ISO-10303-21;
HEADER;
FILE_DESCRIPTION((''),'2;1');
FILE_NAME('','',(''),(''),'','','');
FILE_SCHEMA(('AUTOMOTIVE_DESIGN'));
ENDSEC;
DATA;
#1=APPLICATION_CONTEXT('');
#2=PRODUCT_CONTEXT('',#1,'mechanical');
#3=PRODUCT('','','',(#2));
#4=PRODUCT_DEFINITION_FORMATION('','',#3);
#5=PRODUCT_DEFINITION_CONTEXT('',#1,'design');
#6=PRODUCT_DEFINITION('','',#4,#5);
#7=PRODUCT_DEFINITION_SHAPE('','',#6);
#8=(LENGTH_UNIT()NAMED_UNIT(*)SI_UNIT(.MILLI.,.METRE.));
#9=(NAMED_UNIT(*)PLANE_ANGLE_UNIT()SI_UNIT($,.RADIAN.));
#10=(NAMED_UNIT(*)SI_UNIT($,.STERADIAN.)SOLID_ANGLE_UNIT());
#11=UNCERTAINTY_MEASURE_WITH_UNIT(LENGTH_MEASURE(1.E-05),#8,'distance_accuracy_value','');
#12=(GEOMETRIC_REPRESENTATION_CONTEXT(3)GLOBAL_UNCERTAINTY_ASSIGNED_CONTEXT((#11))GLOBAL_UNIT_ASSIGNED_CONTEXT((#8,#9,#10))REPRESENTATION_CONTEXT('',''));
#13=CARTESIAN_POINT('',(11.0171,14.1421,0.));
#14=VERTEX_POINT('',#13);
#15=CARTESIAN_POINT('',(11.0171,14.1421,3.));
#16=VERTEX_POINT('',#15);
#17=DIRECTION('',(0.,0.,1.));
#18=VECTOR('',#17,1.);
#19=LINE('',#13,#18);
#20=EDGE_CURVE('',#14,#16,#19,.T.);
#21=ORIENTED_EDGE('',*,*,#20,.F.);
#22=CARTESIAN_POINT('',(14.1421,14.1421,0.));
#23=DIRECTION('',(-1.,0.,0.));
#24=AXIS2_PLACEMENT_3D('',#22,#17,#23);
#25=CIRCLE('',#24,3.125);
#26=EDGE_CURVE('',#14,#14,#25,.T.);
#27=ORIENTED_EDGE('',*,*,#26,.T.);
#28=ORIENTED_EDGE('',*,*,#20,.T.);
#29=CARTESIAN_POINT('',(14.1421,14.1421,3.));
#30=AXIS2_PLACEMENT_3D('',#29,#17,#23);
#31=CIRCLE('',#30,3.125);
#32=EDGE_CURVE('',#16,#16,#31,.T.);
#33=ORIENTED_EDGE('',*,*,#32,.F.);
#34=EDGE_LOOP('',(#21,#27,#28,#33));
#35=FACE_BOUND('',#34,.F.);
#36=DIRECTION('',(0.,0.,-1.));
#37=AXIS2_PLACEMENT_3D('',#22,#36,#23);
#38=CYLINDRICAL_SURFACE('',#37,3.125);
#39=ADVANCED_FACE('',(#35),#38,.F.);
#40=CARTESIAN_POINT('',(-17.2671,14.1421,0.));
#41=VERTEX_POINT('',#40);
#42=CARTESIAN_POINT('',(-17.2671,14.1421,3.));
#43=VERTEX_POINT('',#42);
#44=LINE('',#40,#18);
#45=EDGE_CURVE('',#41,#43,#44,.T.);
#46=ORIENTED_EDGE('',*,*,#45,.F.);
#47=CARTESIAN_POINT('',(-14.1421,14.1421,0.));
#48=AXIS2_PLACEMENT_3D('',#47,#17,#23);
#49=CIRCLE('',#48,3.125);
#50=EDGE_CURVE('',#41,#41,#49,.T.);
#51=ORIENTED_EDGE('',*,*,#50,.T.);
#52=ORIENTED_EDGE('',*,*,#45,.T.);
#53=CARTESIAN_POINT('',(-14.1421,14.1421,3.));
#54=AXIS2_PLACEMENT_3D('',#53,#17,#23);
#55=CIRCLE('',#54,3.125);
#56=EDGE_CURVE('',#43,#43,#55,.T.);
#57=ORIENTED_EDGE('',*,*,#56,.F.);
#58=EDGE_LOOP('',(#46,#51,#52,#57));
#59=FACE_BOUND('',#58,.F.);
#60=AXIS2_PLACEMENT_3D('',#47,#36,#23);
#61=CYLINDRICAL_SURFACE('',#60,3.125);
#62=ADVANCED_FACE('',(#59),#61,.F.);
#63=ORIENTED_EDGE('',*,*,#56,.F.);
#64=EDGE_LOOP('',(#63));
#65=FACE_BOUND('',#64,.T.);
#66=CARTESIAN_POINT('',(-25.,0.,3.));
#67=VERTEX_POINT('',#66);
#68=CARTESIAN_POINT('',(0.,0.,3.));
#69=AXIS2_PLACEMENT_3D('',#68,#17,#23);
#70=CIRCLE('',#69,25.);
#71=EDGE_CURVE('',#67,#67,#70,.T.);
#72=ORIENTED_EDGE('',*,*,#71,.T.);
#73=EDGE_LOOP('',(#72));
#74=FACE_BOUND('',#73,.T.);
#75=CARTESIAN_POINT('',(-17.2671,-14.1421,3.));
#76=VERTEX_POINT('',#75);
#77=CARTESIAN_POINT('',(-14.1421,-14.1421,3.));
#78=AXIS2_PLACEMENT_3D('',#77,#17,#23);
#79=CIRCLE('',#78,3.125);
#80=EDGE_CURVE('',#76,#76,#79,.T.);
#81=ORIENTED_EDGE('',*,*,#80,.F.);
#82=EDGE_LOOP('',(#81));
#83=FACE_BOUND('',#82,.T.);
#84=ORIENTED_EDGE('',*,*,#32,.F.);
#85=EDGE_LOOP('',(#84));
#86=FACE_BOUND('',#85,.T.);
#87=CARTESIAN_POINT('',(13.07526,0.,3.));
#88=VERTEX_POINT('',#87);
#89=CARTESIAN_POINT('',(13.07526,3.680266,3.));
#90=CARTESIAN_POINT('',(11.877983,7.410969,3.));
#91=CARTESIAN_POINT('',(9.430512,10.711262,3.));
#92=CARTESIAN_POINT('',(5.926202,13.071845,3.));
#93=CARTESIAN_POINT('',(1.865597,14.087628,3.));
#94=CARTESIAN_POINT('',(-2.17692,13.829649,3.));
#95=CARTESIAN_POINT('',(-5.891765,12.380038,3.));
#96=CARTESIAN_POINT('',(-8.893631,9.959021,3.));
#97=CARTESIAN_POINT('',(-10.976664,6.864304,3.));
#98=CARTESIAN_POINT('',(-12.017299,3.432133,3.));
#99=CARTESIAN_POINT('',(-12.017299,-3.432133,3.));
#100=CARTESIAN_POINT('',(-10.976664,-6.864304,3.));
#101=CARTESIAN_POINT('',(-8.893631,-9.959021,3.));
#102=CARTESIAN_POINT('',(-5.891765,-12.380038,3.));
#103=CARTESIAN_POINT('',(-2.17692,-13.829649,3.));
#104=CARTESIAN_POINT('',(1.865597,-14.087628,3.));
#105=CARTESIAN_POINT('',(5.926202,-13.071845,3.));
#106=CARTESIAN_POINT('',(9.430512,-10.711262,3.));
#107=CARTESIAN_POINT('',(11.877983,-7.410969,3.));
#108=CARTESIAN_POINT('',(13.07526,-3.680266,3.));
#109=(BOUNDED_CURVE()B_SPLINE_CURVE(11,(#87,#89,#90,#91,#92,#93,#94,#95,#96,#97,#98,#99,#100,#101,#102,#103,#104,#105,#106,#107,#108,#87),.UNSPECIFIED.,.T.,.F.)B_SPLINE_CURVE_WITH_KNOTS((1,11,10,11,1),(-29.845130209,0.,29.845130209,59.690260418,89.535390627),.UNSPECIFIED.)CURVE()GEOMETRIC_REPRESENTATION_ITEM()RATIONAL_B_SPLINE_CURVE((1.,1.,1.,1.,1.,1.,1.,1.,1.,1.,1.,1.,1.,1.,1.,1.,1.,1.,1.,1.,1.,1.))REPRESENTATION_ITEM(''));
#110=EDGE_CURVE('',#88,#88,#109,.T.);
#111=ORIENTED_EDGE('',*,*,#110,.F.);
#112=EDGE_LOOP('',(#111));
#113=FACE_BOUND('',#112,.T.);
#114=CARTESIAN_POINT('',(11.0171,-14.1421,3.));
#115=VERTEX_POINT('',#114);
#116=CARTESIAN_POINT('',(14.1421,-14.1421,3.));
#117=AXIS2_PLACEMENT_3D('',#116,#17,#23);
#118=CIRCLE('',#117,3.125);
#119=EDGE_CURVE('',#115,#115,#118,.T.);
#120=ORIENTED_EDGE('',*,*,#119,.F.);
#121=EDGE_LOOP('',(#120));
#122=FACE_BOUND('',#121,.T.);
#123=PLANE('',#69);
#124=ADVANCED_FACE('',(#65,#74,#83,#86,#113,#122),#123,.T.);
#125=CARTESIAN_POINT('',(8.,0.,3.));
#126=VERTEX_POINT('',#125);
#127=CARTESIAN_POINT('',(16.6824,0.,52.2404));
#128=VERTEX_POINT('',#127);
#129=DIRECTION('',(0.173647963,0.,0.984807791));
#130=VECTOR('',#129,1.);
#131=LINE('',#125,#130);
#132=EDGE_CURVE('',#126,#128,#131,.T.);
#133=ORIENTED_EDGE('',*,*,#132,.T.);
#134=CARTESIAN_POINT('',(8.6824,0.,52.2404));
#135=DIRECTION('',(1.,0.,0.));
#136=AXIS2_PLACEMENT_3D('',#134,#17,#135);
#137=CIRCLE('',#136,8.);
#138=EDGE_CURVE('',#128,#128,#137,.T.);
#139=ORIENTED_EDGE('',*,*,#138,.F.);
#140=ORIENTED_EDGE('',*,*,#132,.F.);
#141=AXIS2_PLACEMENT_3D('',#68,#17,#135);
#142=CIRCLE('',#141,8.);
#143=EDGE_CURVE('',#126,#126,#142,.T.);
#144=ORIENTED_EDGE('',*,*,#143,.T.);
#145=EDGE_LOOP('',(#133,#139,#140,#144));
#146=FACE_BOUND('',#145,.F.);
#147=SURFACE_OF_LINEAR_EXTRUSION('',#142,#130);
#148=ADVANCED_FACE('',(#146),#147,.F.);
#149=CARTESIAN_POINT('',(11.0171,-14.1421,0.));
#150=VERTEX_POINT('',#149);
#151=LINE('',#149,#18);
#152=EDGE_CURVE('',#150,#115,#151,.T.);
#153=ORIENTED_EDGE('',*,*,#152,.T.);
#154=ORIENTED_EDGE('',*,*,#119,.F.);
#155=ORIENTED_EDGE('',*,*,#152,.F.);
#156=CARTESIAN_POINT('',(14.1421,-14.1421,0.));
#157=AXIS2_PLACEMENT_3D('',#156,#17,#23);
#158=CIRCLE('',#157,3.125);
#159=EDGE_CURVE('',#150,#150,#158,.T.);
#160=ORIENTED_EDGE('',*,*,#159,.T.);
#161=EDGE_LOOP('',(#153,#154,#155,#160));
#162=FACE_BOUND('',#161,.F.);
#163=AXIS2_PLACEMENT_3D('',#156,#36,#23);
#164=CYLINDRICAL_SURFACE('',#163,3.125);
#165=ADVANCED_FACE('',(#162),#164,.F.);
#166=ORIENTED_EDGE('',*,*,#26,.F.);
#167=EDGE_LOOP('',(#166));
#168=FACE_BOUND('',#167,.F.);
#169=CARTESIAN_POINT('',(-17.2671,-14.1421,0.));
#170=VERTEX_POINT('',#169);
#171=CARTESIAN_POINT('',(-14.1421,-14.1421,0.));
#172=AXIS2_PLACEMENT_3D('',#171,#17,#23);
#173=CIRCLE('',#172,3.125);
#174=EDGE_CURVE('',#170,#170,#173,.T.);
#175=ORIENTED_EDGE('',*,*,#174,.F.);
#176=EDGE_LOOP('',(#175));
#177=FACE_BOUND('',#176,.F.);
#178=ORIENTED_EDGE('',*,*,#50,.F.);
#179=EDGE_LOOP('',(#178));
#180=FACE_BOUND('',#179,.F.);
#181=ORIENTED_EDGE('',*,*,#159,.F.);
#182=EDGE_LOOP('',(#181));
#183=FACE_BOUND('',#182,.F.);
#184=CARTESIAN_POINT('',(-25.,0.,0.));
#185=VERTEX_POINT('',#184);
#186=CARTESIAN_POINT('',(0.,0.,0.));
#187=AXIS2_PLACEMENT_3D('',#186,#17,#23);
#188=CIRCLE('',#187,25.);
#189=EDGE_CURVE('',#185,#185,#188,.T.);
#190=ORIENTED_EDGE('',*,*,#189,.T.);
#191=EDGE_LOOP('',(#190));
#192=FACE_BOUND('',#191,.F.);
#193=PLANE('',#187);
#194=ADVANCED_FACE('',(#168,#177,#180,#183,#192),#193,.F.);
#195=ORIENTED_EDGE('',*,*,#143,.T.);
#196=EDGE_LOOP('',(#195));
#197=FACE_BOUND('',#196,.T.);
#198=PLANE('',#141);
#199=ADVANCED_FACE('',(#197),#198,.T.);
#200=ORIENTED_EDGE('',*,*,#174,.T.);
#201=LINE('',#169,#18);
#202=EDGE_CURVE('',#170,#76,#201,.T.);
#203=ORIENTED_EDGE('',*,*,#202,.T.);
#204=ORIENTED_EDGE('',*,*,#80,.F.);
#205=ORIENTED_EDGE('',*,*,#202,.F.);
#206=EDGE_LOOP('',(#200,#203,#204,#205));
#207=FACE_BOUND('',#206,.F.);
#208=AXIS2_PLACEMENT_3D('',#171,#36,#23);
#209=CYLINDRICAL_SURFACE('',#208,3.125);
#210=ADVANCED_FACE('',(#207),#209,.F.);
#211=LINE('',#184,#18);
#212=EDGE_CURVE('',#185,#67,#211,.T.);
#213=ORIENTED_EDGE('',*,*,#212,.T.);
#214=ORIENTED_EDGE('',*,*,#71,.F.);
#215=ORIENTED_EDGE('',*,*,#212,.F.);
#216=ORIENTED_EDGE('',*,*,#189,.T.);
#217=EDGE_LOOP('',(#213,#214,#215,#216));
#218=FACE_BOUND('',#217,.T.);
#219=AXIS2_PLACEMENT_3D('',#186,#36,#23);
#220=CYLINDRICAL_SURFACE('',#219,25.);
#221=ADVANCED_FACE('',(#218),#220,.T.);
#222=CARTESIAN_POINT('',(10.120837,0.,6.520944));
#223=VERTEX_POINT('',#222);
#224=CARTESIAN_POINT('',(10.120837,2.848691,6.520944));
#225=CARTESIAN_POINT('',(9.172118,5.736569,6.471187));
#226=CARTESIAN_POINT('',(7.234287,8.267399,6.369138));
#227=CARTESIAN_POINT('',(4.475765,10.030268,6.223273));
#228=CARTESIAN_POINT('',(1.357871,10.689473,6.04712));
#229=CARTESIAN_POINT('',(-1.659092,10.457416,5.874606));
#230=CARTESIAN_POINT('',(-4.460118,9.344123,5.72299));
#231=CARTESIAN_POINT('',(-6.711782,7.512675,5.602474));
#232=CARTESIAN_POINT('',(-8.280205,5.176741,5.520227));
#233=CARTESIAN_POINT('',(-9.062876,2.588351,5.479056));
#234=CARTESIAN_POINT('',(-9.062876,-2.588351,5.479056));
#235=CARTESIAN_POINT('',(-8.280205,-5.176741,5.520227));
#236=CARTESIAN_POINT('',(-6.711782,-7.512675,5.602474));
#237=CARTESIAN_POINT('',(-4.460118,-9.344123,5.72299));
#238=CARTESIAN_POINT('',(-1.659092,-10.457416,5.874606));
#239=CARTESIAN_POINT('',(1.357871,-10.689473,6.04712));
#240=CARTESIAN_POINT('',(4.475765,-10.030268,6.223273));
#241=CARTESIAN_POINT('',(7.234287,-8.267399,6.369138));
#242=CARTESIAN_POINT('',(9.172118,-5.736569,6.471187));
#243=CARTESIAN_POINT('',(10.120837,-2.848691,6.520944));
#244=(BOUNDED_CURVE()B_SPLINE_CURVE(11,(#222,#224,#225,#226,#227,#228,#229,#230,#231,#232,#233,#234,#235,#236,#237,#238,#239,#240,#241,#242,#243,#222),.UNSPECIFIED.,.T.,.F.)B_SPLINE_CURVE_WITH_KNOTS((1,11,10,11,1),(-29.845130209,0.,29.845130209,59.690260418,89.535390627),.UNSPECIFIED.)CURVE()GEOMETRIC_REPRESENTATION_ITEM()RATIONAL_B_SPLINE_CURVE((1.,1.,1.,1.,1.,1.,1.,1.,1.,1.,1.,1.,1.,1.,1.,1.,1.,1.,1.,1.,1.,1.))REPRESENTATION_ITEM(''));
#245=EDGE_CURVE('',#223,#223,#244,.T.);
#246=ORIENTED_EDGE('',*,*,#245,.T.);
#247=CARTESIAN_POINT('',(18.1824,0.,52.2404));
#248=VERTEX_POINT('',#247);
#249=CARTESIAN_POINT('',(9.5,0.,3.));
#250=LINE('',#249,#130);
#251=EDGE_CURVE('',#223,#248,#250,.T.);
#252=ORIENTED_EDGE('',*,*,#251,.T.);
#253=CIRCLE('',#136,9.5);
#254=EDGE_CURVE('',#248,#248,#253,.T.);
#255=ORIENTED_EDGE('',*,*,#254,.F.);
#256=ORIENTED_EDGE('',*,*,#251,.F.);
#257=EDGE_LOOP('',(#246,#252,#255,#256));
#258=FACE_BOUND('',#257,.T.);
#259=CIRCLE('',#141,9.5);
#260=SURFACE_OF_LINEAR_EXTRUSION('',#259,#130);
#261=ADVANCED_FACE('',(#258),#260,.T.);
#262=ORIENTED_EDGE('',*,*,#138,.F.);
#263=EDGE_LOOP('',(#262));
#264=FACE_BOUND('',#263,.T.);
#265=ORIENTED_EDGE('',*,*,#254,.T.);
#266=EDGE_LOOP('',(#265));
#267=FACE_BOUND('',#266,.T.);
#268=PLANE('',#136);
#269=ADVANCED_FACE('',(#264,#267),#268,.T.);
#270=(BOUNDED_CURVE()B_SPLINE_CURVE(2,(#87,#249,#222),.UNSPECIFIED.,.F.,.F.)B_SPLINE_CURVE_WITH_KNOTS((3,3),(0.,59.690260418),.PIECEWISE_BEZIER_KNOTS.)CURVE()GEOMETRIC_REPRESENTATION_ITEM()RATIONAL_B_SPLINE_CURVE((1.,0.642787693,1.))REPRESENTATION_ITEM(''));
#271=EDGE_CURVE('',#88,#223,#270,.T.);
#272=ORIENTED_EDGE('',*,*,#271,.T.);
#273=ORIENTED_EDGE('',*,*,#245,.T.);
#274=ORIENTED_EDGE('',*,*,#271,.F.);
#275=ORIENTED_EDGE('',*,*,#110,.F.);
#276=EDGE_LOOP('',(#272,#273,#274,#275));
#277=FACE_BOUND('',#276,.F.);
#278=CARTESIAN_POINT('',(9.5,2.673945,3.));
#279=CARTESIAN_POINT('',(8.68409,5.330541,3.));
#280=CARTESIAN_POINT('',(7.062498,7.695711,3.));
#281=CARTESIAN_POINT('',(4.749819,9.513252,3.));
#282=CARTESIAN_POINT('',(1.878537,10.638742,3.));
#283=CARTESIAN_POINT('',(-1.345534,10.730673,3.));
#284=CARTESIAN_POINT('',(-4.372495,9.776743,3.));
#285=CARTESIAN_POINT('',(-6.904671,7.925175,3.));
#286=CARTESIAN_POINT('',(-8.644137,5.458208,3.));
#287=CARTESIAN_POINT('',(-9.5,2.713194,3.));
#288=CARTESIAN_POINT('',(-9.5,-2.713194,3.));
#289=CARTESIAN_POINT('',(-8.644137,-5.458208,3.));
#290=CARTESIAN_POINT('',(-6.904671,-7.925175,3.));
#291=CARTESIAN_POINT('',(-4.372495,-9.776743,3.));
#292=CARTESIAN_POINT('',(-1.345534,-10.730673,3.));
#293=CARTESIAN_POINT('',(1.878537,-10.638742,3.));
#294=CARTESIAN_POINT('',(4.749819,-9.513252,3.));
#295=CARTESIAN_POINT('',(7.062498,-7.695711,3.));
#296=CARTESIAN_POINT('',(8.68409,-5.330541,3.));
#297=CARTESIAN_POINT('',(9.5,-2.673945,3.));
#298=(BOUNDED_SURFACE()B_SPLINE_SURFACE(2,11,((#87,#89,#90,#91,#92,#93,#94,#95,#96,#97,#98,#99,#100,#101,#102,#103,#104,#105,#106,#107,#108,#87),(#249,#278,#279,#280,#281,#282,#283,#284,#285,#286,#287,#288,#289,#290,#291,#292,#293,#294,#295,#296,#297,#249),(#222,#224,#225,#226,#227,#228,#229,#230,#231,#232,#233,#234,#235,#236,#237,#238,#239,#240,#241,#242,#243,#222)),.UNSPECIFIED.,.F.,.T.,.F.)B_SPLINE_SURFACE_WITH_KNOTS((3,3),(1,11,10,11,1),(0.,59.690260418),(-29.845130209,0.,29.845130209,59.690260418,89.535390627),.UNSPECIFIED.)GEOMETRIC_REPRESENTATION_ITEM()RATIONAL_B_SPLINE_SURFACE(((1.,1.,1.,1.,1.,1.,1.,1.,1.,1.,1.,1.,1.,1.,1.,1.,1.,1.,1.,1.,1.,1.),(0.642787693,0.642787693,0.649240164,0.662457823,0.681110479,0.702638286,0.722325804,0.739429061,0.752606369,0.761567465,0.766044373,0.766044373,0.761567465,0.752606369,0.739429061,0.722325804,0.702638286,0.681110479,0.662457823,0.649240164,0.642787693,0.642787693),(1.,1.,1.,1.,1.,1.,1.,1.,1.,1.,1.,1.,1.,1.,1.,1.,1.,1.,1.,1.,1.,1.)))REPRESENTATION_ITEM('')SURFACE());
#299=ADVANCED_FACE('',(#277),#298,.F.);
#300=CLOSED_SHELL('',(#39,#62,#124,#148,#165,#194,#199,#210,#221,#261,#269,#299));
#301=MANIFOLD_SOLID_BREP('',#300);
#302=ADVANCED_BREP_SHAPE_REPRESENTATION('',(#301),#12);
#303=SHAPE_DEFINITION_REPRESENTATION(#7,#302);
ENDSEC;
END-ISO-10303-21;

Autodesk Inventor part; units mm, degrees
ref_plane "YZ Plane" through (0, 0, 0) normal (1, 0, 0) x (0, 1, 0)
ref_plane "XZ Plane" through (0, 0, 0) normal (0, 1, 0) x (-1, 0, 0)
ref_plane "XY Plane" through (0, 0, 0) normal (0, 0, 1) x (1, 0, 0)
sketch "Sketch2" plane through (0, 0, 0) normal (0, 0, 1) x (-1, 0, 0)
  circle A0 centre (0, 0) radius 25
  line L0 (0, 0) -> (20, 0) construction
  line L1 (0, 0) -> (20, 0) construction
  line L2 (0, 0) -> (20, 0) construction
  line L3 (0, 0) -> (20, 0) construction
  circle A1 centre (14.1421, 14.1421) radius 3.125
  circle A2 centre (-14.1421, 14.1421) radius 3.125
  circle A3 centre (-14.1421, -14.1421) radius 3.125
  circle A4 centre (14.1421, -14.1421) radius 3.125
  dimension "d0" = 50
  dimension "d10" = 6.25
  dimension "d11" = 6.25
  dimension "d12" = 6.25
  dimension "d13" = 6.25
extrude "Extrusion1" add sketch "Sketch2" along normal blind 3
sketch "Sketch19" plane through (0, 0, 3) normal (0, 0, 1) x (1, 0, 0)
  circle A0 centre (0, 0) radius 9.5
  dimension "d40" = 19
sketch "Sketch22" plane through (0, 0, 0) normal (0, 1, 0) x (-1, 0, 0)
  line L0 (25, 3) -> (-25, 3) projected
  line L1 (0, 3) -> (-8.6824, 52.2404)
  line L2 (0, 3) -> (50, 3) construction
  point P0 (0, 0)
  dimension "d41" = 50
  dimension "d42" = 100
sweep "Sweep4" add profiles "Sketch19" path "Sketch22" path curves L1
sketch "Sketch23" plane through (0, 0, 3) normal (0, 0, 1) x (1, 0, 0)
  circle A0 centre (0, 0) radius 8
  dimension "d45" = 16
sketch "Sketch25" plane through (0, 0, 0) normal (0, 1, 0) x (-1, 0, 0)
  line L0 (25, 3) -> (-25, 3) projected
  line L1 (0, 3) -> (-8.6824, 52.2404)
  line L2 (0, 3) -> (50, 3) construction
  point P0 (0, 0)
  dimension "d46" = 50
  dimension "d47" = 100
sweep "Sweep5" cut profiles "Sketch23" path "Sketch25" path curves L1
fillet "Fillet2" radius 3 1 edges at (-9.5, 0, 3)
properties part number "SoporteMarcador"
